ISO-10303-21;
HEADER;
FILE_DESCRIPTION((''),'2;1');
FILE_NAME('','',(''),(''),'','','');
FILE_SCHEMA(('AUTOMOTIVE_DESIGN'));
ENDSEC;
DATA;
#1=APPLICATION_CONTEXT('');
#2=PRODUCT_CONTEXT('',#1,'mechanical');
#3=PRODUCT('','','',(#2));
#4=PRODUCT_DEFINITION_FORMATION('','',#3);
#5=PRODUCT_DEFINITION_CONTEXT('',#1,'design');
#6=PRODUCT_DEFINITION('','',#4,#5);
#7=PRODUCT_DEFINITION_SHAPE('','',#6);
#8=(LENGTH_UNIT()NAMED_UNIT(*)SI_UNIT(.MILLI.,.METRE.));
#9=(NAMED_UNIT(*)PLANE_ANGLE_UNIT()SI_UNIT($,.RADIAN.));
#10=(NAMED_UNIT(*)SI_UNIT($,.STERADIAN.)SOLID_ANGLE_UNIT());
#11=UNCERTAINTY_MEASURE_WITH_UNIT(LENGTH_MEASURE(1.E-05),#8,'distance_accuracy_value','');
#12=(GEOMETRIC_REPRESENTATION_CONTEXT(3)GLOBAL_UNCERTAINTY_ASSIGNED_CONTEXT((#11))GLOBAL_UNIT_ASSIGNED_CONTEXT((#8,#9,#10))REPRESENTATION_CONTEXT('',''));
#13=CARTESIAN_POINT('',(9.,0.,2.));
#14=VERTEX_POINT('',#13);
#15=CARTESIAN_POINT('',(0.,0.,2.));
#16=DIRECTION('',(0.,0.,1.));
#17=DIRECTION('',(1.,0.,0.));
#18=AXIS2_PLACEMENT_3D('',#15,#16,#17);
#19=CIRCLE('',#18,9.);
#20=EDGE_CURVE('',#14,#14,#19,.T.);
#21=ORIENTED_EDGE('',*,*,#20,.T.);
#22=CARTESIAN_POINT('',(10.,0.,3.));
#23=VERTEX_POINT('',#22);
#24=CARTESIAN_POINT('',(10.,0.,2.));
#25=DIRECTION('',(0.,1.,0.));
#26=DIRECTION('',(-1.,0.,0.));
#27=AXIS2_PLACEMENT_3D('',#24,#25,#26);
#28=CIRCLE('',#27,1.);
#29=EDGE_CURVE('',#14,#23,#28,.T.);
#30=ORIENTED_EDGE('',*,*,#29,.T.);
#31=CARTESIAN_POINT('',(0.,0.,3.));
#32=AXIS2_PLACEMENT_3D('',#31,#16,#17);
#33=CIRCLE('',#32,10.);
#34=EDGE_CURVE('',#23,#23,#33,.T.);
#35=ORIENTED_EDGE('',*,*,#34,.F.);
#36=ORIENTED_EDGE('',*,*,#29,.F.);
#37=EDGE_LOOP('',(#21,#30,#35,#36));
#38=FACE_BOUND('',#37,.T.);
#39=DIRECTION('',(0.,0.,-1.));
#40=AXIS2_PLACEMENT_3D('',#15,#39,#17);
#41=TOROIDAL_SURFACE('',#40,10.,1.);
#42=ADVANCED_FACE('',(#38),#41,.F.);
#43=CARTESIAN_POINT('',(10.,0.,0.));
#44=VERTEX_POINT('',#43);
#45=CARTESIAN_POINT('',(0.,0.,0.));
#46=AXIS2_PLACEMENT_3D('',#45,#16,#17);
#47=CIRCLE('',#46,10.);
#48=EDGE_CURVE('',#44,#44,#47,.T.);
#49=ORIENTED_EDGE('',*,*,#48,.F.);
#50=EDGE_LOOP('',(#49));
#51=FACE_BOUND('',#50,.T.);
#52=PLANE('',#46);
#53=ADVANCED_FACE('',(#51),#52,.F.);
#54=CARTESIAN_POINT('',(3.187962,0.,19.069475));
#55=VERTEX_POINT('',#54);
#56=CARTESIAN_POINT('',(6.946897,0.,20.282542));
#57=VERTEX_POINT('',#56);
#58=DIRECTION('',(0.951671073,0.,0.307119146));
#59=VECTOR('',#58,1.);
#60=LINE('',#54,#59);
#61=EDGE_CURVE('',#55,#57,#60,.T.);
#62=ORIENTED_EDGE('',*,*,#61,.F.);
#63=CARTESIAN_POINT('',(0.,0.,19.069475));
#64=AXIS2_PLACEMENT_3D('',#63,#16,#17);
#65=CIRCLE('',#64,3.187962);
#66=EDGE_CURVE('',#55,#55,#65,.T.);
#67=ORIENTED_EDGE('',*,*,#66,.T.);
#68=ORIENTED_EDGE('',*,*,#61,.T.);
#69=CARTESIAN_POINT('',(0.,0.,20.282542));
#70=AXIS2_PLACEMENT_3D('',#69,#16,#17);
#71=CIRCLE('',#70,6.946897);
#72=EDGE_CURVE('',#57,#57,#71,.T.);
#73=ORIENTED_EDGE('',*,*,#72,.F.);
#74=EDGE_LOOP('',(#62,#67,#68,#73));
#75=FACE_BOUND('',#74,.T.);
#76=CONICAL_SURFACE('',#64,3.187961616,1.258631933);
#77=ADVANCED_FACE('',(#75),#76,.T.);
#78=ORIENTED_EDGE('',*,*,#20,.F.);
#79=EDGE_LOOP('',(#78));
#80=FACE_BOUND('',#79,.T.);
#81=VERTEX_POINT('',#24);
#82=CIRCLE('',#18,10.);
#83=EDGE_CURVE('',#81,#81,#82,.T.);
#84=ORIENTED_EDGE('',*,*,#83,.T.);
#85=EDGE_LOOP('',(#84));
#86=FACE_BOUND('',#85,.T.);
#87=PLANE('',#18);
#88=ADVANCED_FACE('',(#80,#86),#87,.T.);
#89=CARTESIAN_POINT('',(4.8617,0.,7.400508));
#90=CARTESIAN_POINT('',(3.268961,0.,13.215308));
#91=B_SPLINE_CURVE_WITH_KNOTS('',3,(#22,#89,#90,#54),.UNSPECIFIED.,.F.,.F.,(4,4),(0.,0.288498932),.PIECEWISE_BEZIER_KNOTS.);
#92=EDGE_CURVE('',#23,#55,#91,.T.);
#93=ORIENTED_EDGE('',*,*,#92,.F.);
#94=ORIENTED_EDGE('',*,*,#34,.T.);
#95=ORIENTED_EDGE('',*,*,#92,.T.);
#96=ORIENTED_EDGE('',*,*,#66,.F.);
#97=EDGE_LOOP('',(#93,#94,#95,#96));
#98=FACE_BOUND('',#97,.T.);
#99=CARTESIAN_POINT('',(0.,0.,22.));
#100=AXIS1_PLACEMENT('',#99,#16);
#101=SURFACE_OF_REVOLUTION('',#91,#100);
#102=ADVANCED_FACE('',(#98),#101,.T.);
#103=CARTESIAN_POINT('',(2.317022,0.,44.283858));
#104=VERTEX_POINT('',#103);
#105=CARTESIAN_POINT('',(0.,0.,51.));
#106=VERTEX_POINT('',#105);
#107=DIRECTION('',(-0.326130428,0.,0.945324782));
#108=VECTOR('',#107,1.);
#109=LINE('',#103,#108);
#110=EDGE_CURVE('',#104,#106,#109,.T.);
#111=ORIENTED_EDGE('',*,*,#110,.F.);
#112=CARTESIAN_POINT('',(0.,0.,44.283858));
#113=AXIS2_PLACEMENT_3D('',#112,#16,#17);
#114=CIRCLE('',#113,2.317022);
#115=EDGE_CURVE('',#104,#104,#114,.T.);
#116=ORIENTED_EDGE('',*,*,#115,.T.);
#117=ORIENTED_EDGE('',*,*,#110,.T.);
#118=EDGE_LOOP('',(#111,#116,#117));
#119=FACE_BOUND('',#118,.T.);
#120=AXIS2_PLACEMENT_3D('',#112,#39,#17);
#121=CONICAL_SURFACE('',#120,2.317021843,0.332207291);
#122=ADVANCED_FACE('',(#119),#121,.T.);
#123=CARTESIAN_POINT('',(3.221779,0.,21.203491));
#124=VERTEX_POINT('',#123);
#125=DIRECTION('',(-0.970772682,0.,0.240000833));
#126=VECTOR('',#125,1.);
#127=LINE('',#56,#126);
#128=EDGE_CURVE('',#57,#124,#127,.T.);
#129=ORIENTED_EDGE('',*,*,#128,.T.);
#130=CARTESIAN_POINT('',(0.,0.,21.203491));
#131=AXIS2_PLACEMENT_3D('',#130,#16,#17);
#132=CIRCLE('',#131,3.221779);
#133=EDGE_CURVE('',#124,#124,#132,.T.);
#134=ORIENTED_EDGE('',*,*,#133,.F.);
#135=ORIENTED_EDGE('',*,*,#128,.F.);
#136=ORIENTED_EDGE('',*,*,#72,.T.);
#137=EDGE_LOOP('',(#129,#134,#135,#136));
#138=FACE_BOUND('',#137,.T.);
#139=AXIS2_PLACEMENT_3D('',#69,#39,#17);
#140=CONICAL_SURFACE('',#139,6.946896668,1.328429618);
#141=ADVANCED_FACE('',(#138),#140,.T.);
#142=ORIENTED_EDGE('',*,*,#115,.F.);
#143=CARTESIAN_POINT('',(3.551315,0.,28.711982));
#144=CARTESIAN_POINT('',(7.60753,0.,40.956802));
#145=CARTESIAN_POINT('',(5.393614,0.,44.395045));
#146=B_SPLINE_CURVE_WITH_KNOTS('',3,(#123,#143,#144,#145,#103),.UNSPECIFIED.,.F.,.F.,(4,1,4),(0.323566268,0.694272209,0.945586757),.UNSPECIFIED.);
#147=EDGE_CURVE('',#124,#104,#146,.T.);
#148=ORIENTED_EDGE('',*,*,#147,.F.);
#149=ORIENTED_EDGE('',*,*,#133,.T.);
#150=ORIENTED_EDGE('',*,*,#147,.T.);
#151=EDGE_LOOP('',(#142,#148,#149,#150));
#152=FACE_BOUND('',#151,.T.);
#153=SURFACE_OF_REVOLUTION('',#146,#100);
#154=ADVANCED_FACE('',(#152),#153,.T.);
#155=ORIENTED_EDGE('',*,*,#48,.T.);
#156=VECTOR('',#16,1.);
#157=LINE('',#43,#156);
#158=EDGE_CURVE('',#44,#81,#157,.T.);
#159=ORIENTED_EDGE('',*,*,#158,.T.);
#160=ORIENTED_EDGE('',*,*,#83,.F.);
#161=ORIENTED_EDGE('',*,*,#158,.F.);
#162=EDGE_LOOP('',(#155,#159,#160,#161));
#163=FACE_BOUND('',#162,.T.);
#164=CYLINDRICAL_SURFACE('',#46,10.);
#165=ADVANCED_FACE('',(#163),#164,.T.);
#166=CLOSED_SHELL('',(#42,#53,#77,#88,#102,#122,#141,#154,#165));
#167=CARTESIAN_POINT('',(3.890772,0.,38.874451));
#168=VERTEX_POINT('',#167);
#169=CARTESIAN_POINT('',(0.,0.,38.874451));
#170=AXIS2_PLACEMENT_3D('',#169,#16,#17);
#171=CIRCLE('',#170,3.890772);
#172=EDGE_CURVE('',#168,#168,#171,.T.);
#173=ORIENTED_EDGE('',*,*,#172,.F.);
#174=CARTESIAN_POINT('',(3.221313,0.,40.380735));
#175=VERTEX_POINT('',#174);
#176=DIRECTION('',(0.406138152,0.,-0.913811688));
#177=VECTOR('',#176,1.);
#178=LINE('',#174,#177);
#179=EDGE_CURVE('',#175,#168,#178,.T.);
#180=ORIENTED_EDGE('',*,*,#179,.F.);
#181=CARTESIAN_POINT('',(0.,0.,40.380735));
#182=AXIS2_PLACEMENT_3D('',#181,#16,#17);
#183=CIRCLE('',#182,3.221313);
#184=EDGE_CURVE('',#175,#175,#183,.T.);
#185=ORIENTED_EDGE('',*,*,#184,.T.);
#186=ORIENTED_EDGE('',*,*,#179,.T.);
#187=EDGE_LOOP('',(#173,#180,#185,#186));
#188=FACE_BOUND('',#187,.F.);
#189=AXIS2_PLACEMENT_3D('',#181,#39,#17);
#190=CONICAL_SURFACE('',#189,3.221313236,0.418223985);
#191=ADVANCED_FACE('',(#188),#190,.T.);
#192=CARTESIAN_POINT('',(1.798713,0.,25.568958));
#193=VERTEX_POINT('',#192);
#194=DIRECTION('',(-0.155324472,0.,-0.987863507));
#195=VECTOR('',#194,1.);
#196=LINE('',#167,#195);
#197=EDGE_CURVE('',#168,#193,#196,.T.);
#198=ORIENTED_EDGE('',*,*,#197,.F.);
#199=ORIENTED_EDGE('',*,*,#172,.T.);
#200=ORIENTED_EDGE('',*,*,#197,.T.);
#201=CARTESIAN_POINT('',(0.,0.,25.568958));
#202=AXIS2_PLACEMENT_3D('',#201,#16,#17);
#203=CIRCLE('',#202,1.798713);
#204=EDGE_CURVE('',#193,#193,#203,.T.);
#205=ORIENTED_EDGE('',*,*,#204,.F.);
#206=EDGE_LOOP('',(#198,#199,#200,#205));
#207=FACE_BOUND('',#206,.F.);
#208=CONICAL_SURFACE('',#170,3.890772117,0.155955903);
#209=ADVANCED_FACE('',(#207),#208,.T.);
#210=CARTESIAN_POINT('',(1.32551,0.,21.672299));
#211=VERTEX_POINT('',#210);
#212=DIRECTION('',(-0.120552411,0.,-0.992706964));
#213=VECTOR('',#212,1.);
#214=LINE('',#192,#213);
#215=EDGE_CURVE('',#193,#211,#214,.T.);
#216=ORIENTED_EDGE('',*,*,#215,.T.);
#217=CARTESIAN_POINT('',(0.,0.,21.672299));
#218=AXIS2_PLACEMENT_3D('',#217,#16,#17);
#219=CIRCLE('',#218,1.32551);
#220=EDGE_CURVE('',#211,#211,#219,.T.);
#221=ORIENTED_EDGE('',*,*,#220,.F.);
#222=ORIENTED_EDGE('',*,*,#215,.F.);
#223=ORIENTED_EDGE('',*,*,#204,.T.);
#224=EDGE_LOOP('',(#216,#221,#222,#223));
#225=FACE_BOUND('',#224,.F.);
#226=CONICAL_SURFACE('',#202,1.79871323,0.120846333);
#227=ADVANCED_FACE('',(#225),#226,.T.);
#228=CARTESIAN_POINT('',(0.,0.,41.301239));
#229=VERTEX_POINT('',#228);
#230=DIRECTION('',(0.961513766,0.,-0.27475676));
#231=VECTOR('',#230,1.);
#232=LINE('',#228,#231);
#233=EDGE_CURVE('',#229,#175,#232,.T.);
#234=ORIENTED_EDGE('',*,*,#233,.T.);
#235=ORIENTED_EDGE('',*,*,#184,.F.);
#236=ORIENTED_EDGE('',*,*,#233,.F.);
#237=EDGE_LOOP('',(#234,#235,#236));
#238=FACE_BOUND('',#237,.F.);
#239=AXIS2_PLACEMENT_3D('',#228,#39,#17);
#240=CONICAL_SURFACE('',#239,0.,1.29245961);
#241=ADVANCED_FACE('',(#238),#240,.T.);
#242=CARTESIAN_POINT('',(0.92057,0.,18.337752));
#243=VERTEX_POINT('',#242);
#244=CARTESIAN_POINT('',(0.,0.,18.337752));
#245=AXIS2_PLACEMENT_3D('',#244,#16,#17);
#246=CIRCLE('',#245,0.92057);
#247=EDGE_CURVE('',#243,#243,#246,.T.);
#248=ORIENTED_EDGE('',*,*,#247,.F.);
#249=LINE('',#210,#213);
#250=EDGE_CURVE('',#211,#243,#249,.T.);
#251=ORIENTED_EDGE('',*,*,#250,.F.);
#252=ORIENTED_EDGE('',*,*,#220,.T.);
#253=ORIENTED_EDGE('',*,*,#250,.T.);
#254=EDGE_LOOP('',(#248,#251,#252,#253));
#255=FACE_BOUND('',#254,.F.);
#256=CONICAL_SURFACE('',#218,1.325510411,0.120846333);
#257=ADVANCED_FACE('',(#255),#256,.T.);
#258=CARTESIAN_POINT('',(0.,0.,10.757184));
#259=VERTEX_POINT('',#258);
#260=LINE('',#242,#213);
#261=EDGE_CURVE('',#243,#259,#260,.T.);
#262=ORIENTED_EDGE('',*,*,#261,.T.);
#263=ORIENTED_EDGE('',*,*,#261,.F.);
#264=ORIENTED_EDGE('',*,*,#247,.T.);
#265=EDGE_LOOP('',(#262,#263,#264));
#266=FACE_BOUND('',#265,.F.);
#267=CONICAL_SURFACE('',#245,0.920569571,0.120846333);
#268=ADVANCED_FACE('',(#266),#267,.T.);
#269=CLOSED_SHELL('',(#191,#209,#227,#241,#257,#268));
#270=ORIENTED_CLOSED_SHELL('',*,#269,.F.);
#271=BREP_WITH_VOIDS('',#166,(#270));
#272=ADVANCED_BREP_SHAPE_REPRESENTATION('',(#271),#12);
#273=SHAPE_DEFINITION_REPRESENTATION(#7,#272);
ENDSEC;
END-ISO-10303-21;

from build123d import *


# Not quite as in the source:
# - a feature names something its author has since deleted; it is built from what else it names


with BuildPart() as f1:
    # F0 (on Front) → F1 (revolve)
    with BuildSketch(Plane.XZ):
        with BuildLine():
            Line((0, 10.7571836561), (0, 0))
            Line((0, 0), (10, 0))
            Line((10, 0), (10, 2))
            Line((10, 2), (9, 2))
            ThreePointArc((9, 2), (9.2928932188, 2.7071067812), (10, 3))
            add(Edge.make_bspline(
                [(10, 3), (4.8616999982, 7.4005079185), (3.2689606671, 13.2153081121), (3.1879616163, 19.0694751767)],
                knots=[0, 0, 0, 0, 0.2884989323, 0.2884989323, 0.2884989323, 0.2884989323], degree=3))
            Line((3.1879616163, 19.0694751767), (0.9205695706, 18.3377522863))
            Line((0.9205695706, 18.3377522863), (0, 10.7571836561))
        make_face()
        with BuildLine():
            Line((0, 51), (0, 44))
            add(Edge.make_bspline(
                [(2.3170218427, 44.2838583015), (1.6508949311, 44.2597847974), (0.8824741052, 44.1653776789), (0, 44)],
                knots=[0.9455867567, 0.9455867567, 0.9455867567, 0.9455867567, 1, 1, 1, 1], degree=3))
            Line((2.3170218427, 44.2838583015), (0, 51))
        make_face()
        with BuildLine():
            Line((1.3255104114, 21.6722985633), (0.9205695706, 18.3377522863))
            Line((0.9205695706, 18.3377522863), (3.1879616163, 19.0694751767))
            add(Edge.make_bspline(
                [(3.1879616163, 19.0694751767), (3.1781161003, 19.7810550677), (3.1906060131, 20.4932165904), (3.2217788711, 21.203490553)],
                knots=[0.2884989323, 0.2884989323, 0.2884989323, 0.2884989323, 0.3235662675, 0.3235662675, 0.3235662675, 0.3235662675], degree=3))
            Line((3.2217788711, 21.203490553), (1.3255104114, 21.6722985633))
        make_face()
        with BuildLine():
            add(Edge.make_bspline(
                [(3.1879616163, 19.0694751767), (3.1781161003, 19.7810550677), (3.1906060131, 20.4932165904), (3.2217788711, 21.203490553)],
                knots=[0.2884989323, 0.2884989323, 0.2884989323, 0.2884989323, 0.3235662675, 0.3235662675, 0.3235662675, 0.3235662675], degree=3))
            Line((3.1879616163, 19.0694751767), (6.9468966685, 20.282542333))
            Line((6.9468966685, 20.282542333), (3.2217788711, 21.203490553))
        make_face()
        with BuildLine():
            Line((1.7987132305, 25.5689583719), (1.3255104114, 21.6722985633))
            Line((1.3255104114, 21.6722985633), (3.2217788711, 21.203490553))
            add(Edge.make_bspline(
                [(3.2217788711, 21.203490553), (3.551315279, 28.7119817542), (7.6075295102, 40.9568023902), (5.393614482, 44.39504487), (2.3170218427, 44.2838583015)],
                knots=[0.3235662675, 0.3235662675, 0.3235662675, 0.3235662675, 0.6942722088, 0.9455867567, 0.9455867567, 0.9455867567, 0.9455867567], degree=3))
            add(Edge.make_bspline(
                [(2.3170218427, 44.2838583015), (1.6508949311, 44.2597847974), (0.8824741052, 44.1653776789), (0, 44)],
                knots=[0.9455867567, 0.9455867567, 0.9455867567, 0.9455867567, 1, 1, 1, 1], degree=3))
            Line((0, 44), (0, 41.3012392819))
            Line((0, 41.3012392819), (3.2213132363, 40.3807349503))
            Line((3.2213132363, 40.3807349503), (3.8907721173, 38.874451071))
            Line((3.8907721173, 38.874451071), (1.7987132305, 25.5689583719))
        make_face()
    revolve(axis=Axis((0, 0, 22), (0, 0, 1)))


solid = f1.part
